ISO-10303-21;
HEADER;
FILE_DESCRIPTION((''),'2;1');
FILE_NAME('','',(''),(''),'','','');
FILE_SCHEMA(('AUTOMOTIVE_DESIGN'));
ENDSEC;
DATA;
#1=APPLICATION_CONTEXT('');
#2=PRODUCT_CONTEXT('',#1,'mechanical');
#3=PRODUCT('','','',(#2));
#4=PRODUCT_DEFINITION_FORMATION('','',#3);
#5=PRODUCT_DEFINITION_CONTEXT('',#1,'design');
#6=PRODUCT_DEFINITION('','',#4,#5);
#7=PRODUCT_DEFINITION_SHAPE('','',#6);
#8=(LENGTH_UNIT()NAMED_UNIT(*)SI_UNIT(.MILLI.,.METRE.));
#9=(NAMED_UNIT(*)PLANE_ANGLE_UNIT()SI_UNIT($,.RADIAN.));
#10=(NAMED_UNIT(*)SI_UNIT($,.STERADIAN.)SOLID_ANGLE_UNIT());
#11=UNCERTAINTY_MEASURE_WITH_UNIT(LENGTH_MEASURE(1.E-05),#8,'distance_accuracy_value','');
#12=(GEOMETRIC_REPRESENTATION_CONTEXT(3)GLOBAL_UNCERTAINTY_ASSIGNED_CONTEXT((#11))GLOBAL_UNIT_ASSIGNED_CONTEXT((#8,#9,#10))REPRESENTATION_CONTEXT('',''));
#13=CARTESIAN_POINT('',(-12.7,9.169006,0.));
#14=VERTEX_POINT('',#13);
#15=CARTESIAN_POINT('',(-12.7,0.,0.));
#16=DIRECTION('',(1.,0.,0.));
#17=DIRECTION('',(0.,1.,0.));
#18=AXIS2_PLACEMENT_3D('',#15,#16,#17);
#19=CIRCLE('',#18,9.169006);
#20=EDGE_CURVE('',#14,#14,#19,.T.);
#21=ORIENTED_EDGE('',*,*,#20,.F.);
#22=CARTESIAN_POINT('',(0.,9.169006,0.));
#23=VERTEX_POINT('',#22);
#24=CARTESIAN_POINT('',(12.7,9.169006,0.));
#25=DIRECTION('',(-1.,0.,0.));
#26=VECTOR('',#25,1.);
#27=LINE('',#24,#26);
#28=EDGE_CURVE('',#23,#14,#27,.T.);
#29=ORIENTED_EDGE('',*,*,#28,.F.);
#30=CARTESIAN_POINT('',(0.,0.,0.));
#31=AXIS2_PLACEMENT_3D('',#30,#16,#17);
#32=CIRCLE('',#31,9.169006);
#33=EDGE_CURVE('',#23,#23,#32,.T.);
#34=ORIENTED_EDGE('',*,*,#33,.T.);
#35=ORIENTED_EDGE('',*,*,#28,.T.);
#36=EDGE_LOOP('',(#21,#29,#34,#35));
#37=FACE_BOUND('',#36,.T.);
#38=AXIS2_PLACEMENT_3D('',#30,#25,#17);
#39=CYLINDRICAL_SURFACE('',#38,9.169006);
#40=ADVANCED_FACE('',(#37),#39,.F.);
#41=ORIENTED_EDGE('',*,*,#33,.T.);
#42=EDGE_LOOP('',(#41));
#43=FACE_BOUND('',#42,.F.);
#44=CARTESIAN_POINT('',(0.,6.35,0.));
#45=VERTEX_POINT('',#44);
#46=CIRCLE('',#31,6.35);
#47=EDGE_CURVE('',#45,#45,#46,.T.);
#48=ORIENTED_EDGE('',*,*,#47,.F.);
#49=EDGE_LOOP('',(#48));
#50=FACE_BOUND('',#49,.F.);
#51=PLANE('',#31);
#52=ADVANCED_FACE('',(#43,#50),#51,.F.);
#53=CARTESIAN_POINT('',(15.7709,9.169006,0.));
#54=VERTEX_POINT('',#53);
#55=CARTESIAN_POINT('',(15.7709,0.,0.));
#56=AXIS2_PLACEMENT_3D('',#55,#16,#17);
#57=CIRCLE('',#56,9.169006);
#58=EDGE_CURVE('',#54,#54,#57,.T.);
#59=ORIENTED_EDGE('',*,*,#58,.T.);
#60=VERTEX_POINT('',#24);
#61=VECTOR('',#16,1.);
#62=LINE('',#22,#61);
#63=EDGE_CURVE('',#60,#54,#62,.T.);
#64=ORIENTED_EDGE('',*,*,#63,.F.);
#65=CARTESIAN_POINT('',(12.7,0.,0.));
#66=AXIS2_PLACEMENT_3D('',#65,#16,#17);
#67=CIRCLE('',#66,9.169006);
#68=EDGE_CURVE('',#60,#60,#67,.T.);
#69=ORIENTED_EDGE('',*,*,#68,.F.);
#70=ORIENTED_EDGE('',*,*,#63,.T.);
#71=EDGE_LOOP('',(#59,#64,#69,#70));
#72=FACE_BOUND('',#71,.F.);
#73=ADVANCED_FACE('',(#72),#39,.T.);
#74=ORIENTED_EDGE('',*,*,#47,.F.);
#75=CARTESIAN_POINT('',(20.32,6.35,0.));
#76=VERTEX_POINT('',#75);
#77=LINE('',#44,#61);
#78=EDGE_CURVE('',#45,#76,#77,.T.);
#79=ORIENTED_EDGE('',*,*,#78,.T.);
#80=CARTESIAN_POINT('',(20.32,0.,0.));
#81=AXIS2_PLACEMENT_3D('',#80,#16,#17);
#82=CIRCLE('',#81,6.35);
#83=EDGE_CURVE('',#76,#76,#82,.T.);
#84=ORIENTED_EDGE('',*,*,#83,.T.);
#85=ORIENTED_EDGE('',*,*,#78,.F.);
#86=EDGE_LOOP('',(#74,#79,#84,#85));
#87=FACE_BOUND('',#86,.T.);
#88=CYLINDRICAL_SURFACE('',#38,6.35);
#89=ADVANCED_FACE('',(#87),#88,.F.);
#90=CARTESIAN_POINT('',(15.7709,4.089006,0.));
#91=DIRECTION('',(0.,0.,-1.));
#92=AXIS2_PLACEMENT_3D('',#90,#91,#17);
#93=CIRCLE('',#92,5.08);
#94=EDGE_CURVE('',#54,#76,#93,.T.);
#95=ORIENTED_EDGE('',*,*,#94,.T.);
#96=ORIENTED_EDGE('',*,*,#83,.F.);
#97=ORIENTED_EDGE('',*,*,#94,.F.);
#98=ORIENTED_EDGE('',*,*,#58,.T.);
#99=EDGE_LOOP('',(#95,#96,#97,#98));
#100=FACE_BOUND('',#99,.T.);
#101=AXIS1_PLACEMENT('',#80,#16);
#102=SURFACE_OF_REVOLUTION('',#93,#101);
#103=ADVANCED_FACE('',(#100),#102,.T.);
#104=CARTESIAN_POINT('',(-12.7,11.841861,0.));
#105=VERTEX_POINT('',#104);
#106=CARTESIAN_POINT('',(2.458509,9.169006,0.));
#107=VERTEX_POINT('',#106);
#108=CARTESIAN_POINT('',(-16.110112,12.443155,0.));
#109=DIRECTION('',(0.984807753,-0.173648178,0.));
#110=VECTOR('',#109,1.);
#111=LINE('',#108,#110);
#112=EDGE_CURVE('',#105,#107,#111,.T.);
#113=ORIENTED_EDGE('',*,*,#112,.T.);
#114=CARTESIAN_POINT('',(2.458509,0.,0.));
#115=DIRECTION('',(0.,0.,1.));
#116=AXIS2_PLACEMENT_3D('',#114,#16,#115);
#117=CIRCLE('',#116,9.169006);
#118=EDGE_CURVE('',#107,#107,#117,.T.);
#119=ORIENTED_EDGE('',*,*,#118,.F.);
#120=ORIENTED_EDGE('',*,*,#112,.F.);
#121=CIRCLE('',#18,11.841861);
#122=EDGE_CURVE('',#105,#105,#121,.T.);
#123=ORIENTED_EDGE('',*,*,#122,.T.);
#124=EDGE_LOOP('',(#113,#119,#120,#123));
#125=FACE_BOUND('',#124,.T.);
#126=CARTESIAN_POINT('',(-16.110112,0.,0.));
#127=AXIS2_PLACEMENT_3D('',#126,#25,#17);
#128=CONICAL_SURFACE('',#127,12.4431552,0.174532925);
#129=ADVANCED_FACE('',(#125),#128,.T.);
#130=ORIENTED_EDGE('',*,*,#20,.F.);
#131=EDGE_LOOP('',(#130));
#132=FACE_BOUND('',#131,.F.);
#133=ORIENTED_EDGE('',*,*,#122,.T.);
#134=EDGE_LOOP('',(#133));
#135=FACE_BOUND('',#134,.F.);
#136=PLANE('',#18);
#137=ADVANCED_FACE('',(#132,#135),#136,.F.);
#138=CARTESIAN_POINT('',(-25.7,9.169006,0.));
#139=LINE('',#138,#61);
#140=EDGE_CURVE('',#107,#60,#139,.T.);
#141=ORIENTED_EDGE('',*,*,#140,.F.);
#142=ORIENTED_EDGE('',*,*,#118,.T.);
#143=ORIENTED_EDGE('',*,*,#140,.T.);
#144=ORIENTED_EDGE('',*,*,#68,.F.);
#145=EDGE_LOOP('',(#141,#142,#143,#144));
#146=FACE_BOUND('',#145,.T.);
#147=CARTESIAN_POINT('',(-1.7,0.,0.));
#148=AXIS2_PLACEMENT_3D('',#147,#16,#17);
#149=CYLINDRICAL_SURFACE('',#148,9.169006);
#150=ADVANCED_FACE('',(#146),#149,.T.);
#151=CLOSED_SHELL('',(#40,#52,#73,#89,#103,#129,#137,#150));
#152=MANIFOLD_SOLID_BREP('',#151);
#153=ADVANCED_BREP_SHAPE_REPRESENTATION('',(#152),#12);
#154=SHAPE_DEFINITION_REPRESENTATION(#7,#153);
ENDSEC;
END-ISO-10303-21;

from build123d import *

# Parameters (mm, degrees)
F0_R        = 12.4431552
F0_R_2      = 9.1690063
F1_DEPTH    = 12.7
F0_R_3      = 6.35
F2_DEPTH    = 20.32
F3_S5_R     = 9.1690063
F3_T6_DEPTH = 24


# Not quite as in the source:
# - a fillet or chamfer that OpenCascade refuses, or shapes differently, is made with other operations: its cross-section is extruded or revolved along the edge and cut away or added


with BuildPart() as f1:
    # F0 (on Right) → F1 (new body, symmetric)
    with BuildSketch(Plane.YZ):
        Circle(F0_R)
        Circle(F0_R_2, mode=Mode.SUBTRACT)
    extrude(amount=F1_DEPTH, both=True)

    # F0 (on Right) → F2 (join)
    with BuildSketch(Plane.YZ):
        Circle(F0_R_2)
        Circle(F0_R_3, mode=Mode.SUBTRACT)
    extrude(amount=F2_DEPTH)

    # F3: chamfer of 5.08 x 28.8101116437 on 1 edges, made by hand


with BuildPart() as f3_tool2:
    # F3_s3 → F3_t4 (revolve)
    with BuildSketch(Plane.XY):
        Polygon((-16.1101116437, 12.4431552), (12.7, 7.3631552), (12.7, 12.4431552), align=None)
    revolve(axis=Axis((12.7, 0, 0), (1, 0, 0)))

    # F3_s5 → F3_t6 (cut, symmetric)
    with BuildSketch(Plane.YZ.offset(-1.7)):
        Circle(F3_S5_R)
    extrude(amount=F3_T6_DEPTH, both=True, mode=Mode.SUBTRACT)


with BuildPart() as f1_1:
    add(f1.part)

    # F3_t1: cut F3_tool2
    add(f3_tool2.part, mode=Mode.SUBTRACT)

    # F4: fillet of radius 5.08 on 1 edges, made by hand

    # F4_s1 → F4_t2 (revolve, cut)
    with BuildSketch(Plane.XY):
        with BuildLine():
            ThreePointArc((15.7709003651, 9.1690063), (18.44676957, 8.4071220926), (20.32, 6.35))
            Line((20.32, 6.35), (20.32, 9.1690063))
            Line((20.32, 9.1690063), (15.7709003651, 9.1690063))
        make_face()
    revolve(axis=Axis((20.32, 0, 0), (1, 0, 0)), mode=Mode.SUBTRACT)


solid = f1_1.part
